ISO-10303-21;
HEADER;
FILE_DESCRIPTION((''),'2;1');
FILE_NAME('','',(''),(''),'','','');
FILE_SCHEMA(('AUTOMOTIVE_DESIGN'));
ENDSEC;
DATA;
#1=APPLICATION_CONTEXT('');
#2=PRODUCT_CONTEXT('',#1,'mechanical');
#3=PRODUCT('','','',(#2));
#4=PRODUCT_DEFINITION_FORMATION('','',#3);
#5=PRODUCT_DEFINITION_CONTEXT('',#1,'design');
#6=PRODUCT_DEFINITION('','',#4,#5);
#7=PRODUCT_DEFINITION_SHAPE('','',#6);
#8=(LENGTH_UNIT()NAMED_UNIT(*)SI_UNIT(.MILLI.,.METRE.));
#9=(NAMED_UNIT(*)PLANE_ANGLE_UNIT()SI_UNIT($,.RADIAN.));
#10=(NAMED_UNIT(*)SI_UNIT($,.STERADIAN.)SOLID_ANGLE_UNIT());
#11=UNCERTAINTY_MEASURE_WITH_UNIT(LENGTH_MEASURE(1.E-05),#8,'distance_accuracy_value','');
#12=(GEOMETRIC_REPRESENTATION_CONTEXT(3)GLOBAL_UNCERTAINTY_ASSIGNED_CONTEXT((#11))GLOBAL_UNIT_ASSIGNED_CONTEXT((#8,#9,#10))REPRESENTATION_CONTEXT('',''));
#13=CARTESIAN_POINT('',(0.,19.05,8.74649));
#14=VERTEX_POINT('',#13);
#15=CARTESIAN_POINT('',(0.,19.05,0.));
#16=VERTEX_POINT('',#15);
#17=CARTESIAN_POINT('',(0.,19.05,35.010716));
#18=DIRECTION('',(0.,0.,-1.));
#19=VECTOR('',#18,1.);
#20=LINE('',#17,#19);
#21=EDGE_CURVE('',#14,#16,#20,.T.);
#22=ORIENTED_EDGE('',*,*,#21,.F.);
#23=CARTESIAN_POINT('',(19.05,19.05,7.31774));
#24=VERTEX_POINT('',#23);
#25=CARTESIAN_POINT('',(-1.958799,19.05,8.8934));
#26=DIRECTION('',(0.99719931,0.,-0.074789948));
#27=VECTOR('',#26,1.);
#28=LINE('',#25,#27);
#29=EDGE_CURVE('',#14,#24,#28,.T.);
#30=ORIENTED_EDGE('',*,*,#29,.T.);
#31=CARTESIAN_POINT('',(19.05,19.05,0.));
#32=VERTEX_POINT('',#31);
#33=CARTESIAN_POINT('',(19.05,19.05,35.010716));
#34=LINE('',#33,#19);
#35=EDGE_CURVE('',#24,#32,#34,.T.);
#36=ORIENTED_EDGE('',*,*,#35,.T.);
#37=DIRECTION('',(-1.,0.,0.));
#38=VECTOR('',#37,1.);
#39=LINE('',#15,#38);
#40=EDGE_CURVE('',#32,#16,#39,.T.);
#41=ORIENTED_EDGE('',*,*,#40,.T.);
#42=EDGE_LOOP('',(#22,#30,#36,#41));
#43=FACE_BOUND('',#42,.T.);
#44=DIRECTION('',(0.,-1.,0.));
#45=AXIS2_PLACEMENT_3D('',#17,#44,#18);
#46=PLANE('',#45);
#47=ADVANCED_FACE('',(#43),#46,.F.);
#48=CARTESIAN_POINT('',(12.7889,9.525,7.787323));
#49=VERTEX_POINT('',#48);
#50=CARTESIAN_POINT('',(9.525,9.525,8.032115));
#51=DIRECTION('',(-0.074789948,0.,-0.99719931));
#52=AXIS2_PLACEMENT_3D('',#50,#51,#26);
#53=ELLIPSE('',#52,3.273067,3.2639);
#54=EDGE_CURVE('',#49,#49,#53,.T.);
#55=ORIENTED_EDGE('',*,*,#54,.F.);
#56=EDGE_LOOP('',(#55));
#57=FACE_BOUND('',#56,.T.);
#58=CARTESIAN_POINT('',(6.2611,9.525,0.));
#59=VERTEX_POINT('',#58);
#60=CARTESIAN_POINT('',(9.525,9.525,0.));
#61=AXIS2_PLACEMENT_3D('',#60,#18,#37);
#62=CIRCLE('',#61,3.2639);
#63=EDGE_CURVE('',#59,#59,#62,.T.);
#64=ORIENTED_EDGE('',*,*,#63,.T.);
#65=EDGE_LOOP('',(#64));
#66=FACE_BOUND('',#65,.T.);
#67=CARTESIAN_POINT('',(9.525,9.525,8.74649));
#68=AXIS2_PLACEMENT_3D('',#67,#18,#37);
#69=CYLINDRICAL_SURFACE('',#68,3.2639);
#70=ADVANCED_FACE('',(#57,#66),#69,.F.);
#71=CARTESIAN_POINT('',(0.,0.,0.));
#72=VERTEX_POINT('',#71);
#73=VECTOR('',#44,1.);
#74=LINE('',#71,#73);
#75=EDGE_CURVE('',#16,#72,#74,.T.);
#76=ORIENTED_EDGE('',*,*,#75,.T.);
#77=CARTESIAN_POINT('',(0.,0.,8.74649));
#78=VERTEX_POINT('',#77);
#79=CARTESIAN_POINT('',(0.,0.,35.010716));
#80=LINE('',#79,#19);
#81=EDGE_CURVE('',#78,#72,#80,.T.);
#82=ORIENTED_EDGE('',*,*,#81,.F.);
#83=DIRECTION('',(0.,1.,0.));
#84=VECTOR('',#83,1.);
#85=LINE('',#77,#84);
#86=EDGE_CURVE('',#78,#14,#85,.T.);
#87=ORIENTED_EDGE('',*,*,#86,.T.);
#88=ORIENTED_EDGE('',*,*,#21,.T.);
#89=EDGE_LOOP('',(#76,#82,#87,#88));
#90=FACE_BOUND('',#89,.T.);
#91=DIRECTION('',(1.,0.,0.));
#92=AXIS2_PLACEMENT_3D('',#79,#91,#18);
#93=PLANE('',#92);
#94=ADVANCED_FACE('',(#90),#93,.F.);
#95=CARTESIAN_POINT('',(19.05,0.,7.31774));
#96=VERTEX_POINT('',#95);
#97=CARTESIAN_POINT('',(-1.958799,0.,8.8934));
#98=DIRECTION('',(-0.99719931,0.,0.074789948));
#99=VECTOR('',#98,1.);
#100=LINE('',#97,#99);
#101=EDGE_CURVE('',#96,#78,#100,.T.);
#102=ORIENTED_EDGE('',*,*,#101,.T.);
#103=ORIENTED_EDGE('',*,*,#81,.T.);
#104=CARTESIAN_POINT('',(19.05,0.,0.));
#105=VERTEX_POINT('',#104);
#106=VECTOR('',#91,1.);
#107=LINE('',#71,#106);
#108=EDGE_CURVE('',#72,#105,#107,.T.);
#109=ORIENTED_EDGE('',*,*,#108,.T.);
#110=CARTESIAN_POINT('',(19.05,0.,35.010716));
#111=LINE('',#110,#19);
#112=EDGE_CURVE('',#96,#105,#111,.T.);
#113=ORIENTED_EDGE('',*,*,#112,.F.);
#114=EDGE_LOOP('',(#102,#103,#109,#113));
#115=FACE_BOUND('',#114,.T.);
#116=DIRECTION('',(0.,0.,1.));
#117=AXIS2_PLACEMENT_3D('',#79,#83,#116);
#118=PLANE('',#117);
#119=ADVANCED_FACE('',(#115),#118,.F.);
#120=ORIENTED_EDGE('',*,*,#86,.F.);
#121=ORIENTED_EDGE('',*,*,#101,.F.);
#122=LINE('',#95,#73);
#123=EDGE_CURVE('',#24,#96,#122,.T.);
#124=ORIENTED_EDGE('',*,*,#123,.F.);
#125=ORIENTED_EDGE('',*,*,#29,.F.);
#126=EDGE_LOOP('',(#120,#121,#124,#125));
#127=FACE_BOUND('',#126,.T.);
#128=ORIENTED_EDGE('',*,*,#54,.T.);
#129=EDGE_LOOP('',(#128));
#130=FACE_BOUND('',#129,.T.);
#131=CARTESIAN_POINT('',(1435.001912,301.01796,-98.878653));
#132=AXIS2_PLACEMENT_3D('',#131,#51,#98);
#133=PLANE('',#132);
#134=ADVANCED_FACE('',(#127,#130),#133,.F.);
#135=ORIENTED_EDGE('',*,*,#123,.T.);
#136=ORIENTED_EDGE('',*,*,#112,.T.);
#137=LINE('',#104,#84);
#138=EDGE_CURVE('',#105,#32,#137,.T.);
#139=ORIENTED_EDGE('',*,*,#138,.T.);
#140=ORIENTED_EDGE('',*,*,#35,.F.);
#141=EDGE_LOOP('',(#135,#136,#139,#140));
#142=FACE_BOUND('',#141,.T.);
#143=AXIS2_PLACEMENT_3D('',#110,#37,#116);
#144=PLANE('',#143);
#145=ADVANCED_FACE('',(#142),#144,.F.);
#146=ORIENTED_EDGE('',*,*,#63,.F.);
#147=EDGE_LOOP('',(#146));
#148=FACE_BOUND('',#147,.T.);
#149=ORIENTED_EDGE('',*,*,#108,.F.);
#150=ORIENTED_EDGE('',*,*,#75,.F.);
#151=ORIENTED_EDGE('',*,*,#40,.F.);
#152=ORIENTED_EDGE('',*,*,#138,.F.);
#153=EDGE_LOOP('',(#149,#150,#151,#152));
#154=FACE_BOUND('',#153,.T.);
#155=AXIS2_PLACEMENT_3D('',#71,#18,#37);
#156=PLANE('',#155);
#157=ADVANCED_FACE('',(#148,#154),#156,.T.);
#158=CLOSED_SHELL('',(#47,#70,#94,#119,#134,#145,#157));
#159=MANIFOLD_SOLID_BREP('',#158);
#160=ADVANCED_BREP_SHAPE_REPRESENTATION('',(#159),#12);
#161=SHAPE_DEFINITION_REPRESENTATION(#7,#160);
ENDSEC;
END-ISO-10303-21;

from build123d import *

# Parameters (mm, degrees)
BOSS_EXTRUDE1_DEPTH = 19.05
SKETCH3_R           = 3.2639
CUT_EXTRUDE2_DEPTH  = 29.325008162


# Read off the part's stored shape, not the designer's step: Boss-Extrude1
with BuildPart() as part:
    # Boss-Extrude1 outline → Boss-Extrude1 (new body)
    with BuildSketch(Plane(origin=(0, 0, 0), x_dir=(1, 0, 0), z_dir=(0, 1, 0))):
        Polygon((19.05, -7.317740003), (19.05, 0), (0, 0), (0, -8.746490003), align=None)
    extrude(amount=BOSS_EXTRUDE1_DEPTH)

    # Sketch3 → Cut-Extrude2 (cut, through all)
    with BuildSketch(Plane(origin=(0, 0, 0), x_dir=(-1, 0, 0), z_dir=(0, 0, -1))):
        with Locations((-9.525, 9.525)):
            Circle(SKETCH3_R)
    extrude(amount=-CUT_EXTRUDE2_DEPTH, mode=Mode.SUBTRACT)


solid = part.part
